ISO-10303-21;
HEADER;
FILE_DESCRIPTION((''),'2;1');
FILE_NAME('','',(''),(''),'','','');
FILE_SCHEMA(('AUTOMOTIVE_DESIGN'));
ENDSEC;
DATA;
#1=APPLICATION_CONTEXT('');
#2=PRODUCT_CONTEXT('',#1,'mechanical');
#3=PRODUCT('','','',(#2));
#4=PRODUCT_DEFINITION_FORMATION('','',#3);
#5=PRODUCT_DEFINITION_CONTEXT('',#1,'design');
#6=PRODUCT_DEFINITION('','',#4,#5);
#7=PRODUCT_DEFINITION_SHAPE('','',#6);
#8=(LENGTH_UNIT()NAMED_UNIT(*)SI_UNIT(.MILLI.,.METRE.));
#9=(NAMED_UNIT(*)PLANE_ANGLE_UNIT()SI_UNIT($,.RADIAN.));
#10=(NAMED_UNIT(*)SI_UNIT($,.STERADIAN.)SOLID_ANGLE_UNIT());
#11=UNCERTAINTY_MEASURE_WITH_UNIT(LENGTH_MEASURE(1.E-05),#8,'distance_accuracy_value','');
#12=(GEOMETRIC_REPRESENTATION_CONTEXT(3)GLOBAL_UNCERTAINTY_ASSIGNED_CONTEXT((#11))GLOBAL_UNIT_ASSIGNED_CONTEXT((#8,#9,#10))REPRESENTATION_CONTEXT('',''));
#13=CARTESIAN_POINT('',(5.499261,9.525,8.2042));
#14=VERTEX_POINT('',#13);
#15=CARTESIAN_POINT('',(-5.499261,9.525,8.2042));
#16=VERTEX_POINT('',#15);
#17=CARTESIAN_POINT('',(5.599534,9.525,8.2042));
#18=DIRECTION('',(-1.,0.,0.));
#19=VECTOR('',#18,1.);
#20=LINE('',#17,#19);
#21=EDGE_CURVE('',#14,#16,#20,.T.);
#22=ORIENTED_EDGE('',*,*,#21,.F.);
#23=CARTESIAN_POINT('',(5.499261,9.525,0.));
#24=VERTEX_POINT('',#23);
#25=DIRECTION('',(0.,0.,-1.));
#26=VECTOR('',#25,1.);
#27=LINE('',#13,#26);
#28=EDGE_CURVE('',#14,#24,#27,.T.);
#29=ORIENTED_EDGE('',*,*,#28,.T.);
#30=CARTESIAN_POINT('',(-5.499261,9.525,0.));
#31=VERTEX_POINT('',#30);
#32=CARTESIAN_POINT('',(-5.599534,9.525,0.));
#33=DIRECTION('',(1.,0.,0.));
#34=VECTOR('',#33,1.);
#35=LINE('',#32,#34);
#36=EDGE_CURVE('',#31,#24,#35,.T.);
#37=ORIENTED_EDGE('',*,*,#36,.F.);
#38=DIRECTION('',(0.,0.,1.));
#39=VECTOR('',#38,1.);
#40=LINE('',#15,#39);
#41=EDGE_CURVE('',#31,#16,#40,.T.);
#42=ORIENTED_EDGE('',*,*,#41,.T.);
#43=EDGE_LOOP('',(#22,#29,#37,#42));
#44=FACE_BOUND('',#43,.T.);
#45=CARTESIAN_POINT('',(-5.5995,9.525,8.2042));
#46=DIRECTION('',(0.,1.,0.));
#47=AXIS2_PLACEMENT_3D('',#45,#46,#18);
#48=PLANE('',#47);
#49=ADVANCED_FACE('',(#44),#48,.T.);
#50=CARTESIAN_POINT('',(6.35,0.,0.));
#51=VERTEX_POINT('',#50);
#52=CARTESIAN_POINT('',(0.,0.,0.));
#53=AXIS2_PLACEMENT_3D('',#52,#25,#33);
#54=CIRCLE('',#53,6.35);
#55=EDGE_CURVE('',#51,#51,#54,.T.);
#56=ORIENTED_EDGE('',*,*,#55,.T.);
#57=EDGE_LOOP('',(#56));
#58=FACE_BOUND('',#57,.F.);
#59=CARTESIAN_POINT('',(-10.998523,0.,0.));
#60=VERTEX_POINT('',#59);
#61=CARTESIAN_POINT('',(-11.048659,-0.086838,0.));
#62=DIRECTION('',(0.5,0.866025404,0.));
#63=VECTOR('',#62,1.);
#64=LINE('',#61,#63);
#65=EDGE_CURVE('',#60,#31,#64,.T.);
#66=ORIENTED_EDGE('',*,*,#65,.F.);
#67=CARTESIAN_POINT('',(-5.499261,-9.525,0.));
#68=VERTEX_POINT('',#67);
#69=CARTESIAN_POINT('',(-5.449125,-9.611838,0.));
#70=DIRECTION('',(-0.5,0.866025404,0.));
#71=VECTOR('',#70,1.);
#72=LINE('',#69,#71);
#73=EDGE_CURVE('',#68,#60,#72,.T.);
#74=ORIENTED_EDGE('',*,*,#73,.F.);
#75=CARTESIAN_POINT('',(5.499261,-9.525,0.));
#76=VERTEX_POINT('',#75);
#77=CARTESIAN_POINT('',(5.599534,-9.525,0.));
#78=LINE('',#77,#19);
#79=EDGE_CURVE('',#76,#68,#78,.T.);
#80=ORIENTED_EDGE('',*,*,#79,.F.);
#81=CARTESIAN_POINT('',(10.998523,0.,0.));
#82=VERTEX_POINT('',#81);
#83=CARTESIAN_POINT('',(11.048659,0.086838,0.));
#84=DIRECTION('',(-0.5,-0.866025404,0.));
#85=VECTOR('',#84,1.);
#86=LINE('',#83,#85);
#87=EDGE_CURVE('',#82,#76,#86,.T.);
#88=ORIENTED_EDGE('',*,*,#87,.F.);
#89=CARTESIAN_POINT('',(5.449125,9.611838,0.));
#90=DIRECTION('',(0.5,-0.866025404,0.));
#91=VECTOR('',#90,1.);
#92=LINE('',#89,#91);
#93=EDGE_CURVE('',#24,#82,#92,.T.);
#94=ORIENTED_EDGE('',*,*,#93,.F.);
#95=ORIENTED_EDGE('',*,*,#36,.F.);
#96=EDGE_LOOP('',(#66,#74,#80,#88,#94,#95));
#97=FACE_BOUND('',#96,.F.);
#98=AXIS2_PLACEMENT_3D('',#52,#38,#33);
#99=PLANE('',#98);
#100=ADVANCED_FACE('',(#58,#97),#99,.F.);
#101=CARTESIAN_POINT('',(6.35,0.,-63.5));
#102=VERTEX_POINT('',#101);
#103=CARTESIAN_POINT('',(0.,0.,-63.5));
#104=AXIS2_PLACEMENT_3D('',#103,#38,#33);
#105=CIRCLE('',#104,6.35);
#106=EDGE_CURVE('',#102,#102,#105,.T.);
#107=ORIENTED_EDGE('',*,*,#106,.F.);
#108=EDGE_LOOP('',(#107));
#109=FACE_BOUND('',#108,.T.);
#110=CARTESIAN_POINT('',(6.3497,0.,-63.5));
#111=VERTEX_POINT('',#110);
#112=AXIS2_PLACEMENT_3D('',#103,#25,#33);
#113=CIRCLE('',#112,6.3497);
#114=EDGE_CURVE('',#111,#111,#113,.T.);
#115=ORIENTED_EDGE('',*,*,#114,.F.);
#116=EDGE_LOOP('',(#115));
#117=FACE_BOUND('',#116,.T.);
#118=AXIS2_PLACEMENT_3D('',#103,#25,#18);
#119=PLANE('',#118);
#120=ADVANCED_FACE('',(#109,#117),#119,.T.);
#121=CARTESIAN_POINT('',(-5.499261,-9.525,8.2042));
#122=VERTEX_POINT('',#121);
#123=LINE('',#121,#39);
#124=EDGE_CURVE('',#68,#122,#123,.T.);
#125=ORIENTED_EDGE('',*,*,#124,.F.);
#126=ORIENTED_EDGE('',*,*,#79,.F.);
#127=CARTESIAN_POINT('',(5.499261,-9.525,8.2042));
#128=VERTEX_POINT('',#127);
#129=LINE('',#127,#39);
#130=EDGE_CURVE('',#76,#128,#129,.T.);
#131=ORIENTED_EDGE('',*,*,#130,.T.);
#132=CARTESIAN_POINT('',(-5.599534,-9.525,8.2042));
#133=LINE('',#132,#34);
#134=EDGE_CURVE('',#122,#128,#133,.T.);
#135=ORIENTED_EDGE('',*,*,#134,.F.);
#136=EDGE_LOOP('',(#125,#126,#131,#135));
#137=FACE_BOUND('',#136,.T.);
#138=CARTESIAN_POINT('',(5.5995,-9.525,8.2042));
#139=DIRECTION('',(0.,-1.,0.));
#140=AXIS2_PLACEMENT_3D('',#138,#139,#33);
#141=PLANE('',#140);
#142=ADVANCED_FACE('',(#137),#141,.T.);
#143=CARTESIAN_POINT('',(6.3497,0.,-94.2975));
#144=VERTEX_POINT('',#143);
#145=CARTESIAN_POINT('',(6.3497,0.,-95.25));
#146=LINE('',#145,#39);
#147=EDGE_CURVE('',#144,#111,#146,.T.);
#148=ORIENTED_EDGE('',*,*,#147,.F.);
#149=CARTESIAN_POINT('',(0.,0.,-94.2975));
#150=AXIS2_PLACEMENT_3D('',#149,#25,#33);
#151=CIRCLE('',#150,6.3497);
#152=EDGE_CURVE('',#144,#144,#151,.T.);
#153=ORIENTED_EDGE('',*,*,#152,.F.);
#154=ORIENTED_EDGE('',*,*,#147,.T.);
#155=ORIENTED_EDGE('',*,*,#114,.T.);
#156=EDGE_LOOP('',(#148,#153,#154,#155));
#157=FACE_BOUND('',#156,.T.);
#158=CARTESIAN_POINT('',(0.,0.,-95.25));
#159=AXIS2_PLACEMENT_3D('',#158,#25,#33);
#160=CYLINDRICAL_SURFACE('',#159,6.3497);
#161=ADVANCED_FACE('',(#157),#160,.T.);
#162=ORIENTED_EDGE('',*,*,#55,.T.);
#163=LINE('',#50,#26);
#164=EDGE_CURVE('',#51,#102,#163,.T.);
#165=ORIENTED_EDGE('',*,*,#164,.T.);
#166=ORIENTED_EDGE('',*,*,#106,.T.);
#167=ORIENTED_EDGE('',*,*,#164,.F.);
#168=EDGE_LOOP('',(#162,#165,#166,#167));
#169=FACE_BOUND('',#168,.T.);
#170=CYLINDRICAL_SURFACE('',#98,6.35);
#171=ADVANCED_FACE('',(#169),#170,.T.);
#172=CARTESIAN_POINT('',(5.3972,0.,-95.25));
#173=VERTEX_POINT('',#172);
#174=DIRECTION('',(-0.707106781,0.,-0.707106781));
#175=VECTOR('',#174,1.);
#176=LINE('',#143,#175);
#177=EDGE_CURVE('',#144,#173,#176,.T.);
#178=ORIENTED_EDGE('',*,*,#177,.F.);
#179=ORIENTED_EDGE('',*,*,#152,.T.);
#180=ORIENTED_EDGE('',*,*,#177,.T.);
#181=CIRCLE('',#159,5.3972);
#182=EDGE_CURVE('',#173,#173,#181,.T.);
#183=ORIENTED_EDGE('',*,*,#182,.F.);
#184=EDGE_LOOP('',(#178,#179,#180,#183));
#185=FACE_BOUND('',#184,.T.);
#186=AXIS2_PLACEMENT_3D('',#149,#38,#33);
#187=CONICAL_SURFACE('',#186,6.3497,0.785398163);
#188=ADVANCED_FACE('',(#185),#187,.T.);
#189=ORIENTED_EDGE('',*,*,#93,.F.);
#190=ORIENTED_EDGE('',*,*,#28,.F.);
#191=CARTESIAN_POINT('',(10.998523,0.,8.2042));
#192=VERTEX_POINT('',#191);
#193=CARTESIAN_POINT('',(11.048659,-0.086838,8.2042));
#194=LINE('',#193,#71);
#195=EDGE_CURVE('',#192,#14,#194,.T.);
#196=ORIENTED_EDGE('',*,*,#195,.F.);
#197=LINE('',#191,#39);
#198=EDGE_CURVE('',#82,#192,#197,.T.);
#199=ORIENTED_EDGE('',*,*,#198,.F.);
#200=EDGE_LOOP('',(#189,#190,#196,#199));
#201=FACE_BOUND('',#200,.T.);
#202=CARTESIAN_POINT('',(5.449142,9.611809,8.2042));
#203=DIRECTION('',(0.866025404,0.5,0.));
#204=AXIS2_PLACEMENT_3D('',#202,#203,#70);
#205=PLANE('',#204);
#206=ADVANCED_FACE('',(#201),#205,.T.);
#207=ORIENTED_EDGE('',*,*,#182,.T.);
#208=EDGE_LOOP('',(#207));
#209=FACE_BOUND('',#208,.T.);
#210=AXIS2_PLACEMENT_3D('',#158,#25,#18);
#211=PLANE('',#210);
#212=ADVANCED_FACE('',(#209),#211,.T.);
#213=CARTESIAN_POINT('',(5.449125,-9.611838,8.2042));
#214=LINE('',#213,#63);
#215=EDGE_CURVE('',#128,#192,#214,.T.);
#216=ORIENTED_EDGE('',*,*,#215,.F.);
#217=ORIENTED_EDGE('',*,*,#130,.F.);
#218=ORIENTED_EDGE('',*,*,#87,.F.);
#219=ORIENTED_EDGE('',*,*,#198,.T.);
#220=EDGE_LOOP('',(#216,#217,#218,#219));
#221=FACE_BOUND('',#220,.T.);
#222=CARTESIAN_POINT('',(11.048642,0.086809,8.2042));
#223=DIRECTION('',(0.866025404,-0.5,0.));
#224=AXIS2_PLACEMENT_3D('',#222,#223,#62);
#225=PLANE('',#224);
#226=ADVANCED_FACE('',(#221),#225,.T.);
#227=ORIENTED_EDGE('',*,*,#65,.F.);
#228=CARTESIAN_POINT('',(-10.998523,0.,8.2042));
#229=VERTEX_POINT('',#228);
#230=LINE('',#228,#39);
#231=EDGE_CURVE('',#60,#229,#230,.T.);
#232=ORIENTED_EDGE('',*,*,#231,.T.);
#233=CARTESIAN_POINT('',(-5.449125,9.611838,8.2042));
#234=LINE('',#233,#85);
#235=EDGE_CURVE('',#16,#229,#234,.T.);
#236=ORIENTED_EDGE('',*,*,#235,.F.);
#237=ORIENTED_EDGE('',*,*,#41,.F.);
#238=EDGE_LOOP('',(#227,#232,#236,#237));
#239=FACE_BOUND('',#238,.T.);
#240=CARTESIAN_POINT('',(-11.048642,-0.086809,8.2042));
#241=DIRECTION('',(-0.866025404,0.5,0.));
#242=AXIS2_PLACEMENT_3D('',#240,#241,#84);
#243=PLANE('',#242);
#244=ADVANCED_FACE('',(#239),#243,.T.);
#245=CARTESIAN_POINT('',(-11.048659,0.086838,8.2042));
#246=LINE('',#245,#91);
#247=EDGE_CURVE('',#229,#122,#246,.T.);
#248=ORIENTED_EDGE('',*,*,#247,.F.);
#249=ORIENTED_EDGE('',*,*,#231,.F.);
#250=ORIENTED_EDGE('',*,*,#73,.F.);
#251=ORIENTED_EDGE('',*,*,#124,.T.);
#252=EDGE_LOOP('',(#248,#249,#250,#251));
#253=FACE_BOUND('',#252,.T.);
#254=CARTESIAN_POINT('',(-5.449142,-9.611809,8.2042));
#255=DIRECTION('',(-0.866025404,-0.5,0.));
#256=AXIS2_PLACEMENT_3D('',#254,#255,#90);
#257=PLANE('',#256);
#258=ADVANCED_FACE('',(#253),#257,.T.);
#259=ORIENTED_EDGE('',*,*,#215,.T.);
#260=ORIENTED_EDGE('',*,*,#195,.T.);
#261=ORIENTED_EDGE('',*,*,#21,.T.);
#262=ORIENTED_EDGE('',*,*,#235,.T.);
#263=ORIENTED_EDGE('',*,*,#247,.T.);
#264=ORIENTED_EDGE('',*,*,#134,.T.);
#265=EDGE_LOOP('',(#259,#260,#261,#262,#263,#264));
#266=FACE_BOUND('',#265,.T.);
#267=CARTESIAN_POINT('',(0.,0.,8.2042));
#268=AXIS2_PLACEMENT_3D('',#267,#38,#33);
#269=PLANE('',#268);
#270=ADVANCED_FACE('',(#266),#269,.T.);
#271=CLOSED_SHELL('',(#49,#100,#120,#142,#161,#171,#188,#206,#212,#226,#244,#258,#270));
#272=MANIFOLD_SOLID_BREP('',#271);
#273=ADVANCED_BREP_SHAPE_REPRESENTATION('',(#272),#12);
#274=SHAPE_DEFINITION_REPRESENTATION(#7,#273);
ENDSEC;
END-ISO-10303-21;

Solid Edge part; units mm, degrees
sketch "Sketch1" plane through (0, 0, 0) normal (0, 0, 1) x (1, 0, 0)
  circle A0 centre (0, 0) radius 11.049
  dimension "D1" = 22.098
extrude "Protrusion1" add sketch "Sketch1" along normal blind 8.2042
sketch "Sketch2" plane through (0, 0, 0) normal (0, 0, -1) x (1, 0, 0)
  circle A0 centre (0, 0) radius 6.35
extrude "Protrusion2" add sketch "Sketch2" along normal blind 95.25
sketch "Sketch3" plane through (0, 0, -95.25) normal (0, 0, -1) x (1, 0, 0)
  circle A0 centre (0, 0) radius 6.3497
extrude "Cutout1" cut sketch "Sketch3" against normal blind 31.75 flip side to cut
chamfer "Chamfer_1" distance 0.9525 angle 45 1 edges at (-6.3497, 0, -95.25)
sketch "Sketch4" plane through (0, 0, 8.2042) normal (0, 0, 1) x (1, 0, 0)
  line L0 (-5.5995, 9.525) -> (5.5995, 9.525)
  dimension "D1" = 19.05
extrude "Cutout2" cut sketch "Sketch4" against normal up to next material side at (0, 9.575, 8.2042)
pattern_circular "Pattern1" count 6 over 360 about axis through (0, 0, 8.2042) along (0, 0, 1) of "Cutout2"
properties part number "113703"
